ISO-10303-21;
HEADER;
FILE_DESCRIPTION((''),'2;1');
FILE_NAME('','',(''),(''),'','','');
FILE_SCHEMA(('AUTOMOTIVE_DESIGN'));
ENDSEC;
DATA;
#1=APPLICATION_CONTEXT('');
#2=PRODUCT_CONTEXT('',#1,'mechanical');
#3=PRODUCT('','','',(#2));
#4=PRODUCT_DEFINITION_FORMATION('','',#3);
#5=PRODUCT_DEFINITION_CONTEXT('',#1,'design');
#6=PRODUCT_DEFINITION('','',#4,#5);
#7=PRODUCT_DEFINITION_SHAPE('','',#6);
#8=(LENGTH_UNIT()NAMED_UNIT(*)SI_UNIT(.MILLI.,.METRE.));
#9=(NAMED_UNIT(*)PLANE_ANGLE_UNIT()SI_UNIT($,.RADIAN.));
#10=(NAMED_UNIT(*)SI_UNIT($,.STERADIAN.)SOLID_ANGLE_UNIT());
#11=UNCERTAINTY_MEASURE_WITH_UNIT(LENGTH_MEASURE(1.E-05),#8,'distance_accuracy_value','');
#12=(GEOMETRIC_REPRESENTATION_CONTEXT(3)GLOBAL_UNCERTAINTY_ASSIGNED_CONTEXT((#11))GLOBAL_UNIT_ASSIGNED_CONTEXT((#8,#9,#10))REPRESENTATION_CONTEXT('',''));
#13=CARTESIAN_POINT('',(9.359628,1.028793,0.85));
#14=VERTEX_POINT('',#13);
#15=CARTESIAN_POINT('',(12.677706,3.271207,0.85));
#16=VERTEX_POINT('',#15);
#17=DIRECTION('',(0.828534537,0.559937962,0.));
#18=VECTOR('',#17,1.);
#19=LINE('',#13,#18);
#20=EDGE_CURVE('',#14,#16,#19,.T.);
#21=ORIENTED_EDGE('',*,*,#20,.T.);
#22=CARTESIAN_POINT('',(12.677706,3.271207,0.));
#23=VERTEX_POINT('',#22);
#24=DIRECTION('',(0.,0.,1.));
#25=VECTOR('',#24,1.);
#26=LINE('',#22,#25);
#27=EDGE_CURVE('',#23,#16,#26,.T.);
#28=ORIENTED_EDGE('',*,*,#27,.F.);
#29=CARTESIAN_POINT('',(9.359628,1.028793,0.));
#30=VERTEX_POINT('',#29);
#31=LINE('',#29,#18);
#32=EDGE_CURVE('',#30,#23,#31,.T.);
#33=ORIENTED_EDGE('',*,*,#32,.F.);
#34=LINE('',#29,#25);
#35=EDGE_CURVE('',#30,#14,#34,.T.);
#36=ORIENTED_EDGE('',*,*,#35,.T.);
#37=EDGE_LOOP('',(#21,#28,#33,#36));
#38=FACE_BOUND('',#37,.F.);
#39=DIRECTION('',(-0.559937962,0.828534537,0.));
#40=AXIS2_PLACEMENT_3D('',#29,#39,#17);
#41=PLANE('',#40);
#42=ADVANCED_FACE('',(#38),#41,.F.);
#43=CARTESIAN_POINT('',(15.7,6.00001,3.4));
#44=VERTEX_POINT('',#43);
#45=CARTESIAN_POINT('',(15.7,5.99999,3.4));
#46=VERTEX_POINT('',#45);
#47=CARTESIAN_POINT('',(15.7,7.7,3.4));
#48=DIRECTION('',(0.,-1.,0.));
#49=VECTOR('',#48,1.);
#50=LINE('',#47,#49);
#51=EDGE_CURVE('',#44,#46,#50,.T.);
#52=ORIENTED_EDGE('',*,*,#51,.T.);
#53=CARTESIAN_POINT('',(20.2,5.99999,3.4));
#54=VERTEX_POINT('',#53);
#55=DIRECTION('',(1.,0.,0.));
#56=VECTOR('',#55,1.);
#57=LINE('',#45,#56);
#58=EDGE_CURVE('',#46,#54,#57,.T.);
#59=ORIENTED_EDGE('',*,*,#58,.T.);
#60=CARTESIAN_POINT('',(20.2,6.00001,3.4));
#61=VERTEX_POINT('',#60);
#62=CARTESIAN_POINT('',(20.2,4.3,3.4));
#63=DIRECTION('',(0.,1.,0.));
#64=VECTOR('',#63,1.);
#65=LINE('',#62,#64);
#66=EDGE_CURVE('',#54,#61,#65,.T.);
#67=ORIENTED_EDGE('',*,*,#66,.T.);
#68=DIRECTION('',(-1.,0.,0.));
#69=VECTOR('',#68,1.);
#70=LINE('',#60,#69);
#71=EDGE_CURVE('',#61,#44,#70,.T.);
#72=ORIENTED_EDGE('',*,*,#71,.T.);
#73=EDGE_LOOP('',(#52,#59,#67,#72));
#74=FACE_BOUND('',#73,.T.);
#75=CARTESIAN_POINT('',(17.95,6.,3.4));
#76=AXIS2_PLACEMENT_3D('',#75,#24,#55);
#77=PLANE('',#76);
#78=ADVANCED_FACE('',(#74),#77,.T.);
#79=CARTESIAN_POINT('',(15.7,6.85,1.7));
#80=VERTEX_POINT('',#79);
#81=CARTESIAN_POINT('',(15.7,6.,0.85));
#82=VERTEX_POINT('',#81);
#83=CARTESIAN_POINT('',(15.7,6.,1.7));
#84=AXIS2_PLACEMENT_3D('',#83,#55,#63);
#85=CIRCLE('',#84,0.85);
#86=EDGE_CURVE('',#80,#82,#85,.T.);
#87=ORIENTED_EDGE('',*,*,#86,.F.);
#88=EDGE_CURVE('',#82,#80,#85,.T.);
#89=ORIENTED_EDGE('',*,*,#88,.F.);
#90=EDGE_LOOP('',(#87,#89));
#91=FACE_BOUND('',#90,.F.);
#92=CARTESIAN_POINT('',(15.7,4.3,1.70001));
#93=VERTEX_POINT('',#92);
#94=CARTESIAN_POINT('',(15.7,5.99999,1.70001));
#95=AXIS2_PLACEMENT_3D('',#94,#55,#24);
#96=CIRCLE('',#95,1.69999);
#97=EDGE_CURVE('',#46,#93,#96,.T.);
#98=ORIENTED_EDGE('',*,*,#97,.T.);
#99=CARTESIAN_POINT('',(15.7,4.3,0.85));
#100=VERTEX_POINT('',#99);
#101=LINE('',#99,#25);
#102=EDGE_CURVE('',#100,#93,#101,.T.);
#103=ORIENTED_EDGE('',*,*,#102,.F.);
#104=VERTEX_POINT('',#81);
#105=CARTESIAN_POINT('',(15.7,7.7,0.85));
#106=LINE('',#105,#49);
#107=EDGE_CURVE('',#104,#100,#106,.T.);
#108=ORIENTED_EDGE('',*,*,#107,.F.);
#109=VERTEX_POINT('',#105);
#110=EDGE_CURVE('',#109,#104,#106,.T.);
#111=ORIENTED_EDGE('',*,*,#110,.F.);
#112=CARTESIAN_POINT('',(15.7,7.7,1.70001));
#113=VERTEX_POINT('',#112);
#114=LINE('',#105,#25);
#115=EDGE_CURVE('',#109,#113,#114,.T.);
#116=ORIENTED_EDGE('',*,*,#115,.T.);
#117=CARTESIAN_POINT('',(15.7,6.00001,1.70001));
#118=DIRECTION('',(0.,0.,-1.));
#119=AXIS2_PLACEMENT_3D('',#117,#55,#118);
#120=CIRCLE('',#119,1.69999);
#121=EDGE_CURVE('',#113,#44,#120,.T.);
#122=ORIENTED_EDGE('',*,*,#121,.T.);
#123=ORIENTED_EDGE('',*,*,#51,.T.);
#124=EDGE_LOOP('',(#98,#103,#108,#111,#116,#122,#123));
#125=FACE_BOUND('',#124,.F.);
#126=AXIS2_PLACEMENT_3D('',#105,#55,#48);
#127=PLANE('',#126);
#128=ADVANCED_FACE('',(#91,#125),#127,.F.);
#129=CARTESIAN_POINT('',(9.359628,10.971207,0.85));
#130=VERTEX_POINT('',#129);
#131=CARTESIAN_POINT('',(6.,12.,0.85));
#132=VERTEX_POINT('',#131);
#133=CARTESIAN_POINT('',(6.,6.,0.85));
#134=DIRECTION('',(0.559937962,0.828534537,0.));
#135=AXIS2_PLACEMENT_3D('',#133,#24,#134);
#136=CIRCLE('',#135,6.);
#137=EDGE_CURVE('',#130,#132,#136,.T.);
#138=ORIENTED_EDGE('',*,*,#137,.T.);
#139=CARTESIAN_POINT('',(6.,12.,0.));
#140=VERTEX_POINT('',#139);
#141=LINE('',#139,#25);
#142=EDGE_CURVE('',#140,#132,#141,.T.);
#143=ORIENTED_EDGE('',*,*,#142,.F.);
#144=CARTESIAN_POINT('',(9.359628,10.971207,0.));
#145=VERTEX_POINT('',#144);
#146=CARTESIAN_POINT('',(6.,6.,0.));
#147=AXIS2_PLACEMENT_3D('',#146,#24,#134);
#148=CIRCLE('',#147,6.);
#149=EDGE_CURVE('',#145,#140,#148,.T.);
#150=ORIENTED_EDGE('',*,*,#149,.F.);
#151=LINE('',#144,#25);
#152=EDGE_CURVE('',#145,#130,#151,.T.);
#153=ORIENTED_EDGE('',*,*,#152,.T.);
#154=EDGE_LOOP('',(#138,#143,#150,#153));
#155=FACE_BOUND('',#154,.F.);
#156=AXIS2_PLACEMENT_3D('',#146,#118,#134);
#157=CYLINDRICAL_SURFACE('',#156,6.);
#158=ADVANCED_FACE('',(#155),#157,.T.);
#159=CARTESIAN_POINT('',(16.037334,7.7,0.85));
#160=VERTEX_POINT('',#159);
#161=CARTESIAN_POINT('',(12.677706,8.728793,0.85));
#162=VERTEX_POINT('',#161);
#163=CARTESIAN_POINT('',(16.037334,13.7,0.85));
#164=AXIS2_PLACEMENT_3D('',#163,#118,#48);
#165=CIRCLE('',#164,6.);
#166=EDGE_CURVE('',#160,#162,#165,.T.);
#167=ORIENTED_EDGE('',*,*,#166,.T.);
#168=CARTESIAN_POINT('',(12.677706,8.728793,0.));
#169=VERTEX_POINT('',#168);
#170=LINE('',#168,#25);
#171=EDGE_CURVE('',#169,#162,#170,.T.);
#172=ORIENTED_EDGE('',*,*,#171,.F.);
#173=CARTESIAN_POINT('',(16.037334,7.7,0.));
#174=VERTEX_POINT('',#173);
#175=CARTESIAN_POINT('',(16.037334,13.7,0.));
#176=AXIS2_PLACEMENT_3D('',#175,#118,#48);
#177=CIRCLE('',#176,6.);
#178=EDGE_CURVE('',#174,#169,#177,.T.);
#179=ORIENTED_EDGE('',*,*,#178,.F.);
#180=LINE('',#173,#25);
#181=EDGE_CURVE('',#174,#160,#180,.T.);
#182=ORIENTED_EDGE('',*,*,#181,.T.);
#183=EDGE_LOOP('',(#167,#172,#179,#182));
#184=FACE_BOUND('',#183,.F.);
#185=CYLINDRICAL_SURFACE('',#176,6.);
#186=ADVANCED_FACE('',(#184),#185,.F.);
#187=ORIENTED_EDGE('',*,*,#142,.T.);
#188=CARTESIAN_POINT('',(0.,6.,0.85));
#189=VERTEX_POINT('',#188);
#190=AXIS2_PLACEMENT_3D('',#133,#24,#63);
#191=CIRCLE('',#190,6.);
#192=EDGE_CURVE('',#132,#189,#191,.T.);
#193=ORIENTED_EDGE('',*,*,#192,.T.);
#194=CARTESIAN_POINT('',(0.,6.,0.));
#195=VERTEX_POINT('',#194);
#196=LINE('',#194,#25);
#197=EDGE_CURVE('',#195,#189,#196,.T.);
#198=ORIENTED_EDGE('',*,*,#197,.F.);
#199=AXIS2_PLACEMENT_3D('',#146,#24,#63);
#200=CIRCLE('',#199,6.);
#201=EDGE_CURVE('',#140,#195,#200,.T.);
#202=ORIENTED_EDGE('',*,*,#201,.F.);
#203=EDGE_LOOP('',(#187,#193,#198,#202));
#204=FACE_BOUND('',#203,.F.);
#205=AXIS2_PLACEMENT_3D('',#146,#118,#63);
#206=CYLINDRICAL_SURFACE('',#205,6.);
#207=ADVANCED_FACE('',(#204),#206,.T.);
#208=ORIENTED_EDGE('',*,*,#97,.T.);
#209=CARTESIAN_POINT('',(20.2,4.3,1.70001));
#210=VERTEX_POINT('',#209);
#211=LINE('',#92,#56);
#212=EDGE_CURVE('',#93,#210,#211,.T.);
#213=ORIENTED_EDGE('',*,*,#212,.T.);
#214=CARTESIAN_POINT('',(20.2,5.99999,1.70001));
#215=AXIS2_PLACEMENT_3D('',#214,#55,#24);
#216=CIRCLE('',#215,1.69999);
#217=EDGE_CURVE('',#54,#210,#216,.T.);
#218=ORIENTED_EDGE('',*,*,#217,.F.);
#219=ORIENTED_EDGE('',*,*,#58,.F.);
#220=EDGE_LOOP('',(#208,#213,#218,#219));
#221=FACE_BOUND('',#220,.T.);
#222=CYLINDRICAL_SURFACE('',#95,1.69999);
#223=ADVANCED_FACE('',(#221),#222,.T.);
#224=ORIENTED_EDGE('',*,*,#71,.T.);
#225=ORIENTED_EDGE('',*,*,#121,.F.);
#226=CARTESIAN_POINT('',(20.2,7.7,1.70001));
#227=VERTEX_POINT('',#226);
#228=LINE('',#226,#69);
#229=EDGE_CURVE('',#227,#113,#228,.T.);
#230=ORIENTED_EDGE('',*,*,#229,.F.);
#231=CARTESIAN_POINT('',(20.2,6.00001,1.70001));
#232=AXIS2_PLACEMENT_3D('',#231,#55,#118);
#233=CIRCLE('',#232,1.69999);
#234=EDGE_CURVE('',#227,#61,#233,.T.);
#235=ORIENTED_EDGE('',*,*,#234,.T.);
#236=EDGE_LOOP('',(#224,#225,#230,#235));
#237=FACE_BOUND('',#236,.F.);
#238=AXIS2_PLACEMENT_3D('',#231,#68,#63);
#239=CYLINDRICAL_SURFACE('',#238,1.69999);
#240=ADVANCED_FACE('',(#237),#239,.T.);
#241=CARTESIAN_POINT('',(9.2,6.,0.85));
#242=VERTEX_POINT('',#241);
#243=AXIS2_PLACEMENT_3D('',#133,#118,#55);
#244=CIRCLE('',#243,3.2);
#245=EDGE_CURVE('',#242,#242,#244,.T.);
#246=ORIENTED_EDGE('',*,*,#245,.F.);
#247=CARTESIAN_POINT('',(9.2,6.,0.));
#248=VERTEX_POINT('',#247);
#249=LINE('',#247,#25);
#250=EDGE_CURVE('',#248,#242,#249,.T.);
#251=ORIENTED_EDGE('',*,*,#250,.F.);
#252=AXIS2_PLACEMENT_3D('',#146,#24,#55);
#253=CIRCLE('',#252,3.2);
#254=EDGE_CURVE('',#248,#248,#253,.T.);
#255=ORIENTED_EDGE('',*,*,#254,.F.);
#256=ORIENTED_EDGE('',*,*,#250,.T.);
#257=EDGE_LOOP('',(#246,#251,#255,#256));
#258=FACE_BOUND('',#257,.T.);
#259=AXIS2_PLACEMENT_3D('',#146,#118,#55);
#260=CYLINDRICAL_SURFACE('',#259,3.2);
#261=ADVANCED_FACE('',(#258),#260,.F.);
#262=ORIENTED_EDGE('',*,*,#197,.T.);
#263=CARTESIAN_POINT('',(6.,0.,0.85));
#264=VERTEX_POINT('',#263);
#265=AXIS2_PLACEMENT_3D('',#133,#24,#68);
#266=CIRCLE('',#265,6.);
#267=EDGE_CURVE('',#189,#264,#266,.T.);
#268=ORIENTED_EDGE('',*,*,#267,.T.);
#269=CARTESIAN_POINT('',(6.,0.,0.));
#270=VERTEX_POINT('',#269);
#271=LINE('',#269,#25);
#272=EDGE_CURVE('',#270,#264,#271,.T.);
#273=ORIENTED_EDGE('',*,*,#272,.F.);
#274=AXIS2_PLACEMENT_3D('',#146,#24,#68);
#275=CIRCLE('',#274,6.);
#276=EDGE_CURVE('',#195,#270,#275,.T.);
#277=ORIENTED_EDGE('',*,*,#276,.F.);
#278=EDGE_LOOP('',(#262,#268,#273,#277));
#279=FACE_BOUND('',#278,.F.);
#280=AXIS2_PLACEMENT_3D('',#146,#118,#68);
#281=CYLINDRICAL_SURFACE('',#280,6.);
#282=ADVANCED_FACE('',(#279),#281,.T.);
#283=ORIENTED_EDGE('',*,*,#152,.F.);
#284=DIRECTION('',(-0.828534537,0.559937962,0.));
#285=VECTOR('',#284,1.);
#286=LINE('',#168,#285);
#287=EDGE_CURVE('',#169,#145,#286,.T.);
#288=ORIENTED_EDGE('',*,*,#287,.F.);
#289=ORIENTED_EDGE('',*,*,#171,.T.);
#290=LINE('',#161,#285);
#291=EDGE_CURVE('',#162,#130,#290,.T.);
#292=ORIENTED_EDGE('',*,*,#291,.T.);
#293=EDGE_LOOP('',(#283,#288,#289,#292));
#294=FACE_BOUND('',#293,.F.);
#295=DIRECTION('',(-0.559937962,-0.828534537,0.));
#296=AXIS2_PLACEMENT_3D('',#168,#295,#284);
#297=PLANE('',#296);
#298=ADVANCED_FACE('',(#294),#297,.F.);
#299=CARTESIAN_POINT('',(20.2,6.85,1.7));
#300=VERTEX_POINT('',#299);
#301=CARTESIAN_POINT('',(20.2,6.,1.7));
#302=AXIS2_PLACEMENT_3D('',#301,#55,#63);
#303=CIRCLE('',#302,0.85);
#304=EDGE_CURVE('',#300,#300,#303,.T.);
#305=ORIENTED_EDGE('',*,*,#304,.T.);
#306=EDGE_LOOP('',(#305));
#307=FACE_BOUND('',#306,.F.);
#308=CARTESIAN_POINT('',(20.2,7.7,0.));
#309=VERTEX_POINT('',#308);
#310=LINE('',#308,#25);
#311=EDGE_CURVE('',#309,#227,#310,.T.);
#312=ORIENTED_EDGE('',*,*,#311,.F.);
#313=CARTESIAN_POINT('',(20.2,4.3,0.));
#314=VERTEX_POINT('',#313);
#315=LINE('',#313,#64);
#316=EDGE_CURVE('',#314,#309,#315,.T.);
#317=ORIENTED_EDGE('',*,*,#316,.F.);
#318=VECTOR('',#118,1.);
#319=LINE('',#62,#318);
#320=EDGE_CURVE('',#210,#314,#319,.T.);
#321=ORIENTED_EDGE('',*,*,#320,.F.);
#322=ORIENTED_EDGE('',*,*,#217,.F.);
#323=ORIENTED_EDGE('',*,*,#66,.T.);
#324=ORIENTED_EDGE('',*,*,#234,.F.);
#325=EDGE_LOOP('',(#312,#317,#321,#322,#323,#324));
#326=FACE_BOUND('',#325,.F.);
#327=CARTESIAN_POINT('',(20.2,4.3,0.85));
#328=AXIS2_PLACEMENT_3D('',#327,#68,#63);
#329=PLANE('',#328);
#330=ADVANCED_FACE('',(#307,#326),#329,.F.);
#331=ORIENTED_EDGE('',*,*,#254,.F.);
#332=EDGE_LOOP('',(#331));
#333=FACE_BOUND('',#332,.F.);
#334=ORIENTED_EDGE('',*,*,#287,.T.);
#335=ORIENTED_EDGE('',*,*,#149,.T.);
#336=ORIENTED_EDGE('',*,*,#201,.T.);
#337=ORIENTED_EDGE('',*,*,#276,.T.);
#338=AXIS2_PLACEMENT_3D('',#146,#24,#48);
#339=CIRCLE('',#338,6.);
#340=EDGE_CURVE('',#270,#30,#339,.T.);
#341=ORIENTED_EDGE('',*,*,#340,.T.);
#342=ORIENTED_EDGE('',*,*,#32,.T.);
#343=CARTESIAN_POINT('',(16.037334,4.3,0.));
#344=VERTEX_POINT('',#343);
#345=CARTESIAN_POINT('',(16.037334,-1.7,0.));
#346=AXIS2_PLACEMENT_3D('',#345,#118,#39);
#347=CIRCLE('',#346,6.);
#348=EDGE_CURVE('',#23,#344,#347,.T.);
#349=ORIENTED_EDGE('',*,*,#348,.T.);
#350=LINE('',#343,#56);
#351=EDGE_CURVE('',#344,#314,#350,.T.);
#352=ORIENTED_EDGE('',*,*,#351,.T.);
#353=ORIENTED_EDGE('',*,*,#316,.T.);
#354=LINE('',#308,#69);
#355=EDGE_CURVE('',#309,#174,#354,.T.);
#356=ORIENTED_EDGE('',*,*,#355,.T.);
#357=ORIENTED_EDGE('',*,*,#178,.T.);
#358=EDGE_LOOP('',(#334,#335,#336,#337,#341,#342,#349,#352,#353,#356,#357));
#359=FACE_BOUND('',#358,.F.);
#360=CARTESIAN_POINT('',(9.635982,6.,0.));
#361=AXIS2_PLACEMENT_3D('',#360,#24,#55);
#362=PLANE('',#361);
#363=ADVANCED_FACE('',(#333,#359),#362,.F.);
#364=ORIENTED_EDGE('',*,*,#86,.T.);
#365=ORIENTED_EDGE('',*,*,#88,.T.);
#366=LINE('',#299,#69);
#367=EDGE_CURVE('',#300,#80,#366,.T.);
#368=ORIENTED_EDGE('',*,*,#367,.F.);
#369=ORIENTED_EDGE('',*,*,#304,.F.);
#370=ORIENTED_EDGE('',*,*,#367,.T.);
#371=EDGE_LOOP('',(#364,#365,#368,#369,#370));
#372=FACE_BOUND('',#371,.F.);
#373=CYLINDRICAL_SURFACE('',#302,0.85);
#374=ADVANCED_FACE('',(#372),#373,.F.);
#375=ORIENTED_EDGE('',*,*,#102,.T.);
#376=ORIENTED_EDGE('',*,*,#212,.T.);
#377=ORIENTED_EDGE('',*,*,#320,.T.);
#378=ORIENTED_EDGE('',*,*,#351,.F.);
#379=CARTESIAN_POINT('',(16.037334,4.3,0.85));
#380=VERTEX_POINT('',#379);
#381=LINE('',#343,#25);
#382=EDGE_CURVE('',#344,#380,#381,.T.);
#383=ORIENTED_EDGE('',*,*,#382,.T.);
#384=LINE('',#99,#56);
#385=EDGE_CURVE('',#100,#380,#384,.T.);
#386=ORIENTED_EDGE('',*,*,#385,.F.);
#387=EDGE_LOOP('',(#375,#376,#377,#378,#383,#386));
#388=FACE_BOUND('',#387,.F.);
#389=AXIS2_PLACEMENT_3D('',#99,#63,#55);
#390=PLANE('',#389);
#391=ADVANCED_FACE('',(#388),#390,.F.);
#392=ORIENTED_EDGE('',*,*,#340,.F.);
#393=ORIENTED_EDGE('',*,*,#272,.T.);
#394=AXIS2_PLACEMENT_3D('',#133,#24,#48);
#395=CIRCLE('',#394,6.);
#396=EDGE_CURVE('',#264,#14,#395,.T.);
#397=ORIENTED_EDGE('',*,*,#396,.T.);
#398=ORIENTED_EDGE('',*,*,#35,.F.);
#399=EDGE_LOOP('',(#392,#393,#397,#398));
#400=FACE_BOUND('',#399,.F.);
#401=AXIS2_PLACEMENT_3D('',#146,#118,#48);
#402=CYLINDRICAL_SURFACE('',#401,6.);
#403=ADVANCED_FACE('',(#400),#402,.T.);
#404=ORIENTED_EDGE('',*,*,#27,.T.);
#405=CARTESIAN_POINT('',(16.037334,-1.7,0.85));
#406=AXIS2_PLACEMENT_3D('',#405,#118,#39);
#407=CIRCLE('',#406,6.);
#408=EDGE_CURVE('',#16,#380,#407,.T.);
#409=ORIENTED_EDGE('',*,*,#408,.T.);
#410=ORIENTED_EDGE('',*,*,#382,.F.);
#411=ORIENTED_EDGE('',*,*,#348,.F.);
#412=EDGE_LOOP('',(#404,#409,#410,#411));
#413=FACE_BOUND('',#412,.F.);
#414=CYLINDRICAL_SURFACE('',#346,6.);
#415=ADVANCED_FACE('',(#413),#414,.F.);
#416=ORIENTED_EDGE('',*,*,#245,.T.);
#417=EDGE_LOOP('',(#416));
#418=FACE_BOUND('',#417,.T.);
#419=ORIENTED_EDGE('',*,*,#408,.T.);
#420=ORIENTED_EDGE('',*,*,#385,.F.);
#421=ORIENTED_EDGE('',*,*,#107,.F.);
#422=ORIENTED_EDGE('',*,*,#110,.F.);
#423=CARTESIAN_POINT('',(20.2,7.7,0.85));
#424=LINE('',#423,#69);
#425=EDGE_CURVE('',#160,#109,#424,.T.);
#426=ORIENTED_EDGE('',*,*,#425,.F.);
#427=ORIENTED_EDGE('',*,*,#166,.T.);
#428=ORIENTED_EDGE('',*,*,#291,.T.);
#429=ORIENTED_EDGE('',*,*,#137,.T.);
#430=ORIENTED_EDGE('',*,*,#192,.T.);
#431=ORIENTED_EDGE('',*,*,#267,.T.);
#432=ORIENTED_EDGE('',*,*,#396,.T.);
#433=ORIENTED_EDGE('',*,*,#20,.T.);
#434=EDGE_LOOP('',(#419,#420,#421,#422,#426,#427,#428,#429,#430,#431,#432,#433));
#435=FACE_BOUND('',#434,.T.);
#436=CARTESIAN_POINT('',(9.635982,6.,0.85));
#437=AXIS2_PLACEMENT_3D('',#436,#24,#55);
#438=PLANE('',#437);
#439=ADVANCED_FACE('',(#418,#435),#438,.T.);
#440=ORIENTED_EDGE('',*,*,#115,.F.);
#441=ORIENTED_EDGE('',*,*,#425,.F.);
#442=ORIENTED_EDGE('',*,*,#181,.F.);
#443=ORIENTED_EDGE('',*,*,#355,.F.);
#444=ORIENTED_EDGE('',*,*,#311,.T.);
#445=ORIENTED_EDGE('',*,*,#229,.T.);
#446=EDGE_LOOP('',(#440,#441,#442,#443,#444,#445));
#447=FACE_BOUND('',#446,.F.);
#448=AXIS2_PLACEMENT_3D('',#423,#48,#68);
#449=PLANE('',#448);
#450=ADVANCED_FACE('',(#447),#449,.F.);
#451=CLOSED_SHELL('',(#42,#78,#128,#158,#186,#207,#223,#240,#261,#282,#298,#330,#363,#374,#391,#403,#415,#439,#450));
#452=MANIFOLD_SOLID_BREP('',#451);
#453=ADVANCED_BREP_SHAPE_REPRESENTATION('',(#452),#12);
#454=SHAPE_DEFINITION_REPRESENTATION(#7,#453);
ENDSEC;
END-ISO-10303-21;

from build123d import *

# Parameters (mm, degrees)
F0_R     = 3.2
F1_DEPTH = 0.85
F3_DEPTH = 2.55
F4_R     = 1.69999
F5_R     = 0.85
F6_DEPTH = 25


# Not quite as in the source:
# - a fillet or chamfer is up to 0.001 mm smaller than in the source, because OpenCascade refuses the exact size


with BuildPart() as f1:
    # F0 (on Top) → F1 (new body)
    with BuildSketch(Plane.XY):
        with BuildLine():
            Line((16.0373335058, 4.3), (20.2, 4.3))
            Line((20.2, 4.3), (20.2, 7.7))
            Line((20.2, 7.7), (16.0373335058, 7.7))
            ThreePointArc((16.0373335058, 7.7), (14.2805243712, 7.9629605488), (12.6777057346, 8.7287927785))
            Line((12.6777057346, 8.7287927785), (9.3596277711, 10.9712072215))
            ThreePointArc((9.3596277711, 10.9712072215), (7.7568091346, 11.7370394512), (6, 12))
            ThreePointArc((6, 12), (1.7573593129, 10.2426406871), (0, 6))
            ThreePointArc((0, 6), (1.7573593129, 1.7573593129), (6, 0))
            ThreePointArc((6, 0), (7.7568091346, 0.2629605488), (9.3596277711, 1.0287927785))
            Line((9.3596277711, 1.0287927785), (12.6777057346, 3.2712072215))
            ThreePointArc((12.6777057346, 3.2712072215), (14.2805243712, 4.0370394512), (16.0373335058, 4.3))
        make_face()
        with Locations((6, 6)):
            Circle(F0_R, mode=Mode.SUBTRACT)
    extrude(amount=F1_DEPTH)

    # F2 (on face) → F3 (join)
    with BuildSketch(Plane.XY.offset(0.85)):
        Polygon((20.2, 4.3), (20.2, 7.7), (16.0373335058, 7.7), (15.7, 7.7), (15.7, 4.3), (16.0373335058, 4.3), align=None)
    extrude(amount=F3_DEPTH)

    # F4 (radius 1.7 in the source; OpenCascade refuses exactly that, so slightly less here)
    f4_edges = [f1.edges().sort_by_distance(p)[0] for p in [
        (17.95, 7.7, 3.4),
        (17.95, 4.3, 3.4),
    ]]
    fillet(f4_edges, radius=F4_R)

    # F5 (on face) → F6 (cut)
    with BuildSketch(Plane.YZ.offset(20.2)):
        with Locations((6, 1.7)):
            Circle(F5_R)
    extrude(amount=-F6_DEPTH, mode=Mode.SUBTRACT)


solid = f1.part
